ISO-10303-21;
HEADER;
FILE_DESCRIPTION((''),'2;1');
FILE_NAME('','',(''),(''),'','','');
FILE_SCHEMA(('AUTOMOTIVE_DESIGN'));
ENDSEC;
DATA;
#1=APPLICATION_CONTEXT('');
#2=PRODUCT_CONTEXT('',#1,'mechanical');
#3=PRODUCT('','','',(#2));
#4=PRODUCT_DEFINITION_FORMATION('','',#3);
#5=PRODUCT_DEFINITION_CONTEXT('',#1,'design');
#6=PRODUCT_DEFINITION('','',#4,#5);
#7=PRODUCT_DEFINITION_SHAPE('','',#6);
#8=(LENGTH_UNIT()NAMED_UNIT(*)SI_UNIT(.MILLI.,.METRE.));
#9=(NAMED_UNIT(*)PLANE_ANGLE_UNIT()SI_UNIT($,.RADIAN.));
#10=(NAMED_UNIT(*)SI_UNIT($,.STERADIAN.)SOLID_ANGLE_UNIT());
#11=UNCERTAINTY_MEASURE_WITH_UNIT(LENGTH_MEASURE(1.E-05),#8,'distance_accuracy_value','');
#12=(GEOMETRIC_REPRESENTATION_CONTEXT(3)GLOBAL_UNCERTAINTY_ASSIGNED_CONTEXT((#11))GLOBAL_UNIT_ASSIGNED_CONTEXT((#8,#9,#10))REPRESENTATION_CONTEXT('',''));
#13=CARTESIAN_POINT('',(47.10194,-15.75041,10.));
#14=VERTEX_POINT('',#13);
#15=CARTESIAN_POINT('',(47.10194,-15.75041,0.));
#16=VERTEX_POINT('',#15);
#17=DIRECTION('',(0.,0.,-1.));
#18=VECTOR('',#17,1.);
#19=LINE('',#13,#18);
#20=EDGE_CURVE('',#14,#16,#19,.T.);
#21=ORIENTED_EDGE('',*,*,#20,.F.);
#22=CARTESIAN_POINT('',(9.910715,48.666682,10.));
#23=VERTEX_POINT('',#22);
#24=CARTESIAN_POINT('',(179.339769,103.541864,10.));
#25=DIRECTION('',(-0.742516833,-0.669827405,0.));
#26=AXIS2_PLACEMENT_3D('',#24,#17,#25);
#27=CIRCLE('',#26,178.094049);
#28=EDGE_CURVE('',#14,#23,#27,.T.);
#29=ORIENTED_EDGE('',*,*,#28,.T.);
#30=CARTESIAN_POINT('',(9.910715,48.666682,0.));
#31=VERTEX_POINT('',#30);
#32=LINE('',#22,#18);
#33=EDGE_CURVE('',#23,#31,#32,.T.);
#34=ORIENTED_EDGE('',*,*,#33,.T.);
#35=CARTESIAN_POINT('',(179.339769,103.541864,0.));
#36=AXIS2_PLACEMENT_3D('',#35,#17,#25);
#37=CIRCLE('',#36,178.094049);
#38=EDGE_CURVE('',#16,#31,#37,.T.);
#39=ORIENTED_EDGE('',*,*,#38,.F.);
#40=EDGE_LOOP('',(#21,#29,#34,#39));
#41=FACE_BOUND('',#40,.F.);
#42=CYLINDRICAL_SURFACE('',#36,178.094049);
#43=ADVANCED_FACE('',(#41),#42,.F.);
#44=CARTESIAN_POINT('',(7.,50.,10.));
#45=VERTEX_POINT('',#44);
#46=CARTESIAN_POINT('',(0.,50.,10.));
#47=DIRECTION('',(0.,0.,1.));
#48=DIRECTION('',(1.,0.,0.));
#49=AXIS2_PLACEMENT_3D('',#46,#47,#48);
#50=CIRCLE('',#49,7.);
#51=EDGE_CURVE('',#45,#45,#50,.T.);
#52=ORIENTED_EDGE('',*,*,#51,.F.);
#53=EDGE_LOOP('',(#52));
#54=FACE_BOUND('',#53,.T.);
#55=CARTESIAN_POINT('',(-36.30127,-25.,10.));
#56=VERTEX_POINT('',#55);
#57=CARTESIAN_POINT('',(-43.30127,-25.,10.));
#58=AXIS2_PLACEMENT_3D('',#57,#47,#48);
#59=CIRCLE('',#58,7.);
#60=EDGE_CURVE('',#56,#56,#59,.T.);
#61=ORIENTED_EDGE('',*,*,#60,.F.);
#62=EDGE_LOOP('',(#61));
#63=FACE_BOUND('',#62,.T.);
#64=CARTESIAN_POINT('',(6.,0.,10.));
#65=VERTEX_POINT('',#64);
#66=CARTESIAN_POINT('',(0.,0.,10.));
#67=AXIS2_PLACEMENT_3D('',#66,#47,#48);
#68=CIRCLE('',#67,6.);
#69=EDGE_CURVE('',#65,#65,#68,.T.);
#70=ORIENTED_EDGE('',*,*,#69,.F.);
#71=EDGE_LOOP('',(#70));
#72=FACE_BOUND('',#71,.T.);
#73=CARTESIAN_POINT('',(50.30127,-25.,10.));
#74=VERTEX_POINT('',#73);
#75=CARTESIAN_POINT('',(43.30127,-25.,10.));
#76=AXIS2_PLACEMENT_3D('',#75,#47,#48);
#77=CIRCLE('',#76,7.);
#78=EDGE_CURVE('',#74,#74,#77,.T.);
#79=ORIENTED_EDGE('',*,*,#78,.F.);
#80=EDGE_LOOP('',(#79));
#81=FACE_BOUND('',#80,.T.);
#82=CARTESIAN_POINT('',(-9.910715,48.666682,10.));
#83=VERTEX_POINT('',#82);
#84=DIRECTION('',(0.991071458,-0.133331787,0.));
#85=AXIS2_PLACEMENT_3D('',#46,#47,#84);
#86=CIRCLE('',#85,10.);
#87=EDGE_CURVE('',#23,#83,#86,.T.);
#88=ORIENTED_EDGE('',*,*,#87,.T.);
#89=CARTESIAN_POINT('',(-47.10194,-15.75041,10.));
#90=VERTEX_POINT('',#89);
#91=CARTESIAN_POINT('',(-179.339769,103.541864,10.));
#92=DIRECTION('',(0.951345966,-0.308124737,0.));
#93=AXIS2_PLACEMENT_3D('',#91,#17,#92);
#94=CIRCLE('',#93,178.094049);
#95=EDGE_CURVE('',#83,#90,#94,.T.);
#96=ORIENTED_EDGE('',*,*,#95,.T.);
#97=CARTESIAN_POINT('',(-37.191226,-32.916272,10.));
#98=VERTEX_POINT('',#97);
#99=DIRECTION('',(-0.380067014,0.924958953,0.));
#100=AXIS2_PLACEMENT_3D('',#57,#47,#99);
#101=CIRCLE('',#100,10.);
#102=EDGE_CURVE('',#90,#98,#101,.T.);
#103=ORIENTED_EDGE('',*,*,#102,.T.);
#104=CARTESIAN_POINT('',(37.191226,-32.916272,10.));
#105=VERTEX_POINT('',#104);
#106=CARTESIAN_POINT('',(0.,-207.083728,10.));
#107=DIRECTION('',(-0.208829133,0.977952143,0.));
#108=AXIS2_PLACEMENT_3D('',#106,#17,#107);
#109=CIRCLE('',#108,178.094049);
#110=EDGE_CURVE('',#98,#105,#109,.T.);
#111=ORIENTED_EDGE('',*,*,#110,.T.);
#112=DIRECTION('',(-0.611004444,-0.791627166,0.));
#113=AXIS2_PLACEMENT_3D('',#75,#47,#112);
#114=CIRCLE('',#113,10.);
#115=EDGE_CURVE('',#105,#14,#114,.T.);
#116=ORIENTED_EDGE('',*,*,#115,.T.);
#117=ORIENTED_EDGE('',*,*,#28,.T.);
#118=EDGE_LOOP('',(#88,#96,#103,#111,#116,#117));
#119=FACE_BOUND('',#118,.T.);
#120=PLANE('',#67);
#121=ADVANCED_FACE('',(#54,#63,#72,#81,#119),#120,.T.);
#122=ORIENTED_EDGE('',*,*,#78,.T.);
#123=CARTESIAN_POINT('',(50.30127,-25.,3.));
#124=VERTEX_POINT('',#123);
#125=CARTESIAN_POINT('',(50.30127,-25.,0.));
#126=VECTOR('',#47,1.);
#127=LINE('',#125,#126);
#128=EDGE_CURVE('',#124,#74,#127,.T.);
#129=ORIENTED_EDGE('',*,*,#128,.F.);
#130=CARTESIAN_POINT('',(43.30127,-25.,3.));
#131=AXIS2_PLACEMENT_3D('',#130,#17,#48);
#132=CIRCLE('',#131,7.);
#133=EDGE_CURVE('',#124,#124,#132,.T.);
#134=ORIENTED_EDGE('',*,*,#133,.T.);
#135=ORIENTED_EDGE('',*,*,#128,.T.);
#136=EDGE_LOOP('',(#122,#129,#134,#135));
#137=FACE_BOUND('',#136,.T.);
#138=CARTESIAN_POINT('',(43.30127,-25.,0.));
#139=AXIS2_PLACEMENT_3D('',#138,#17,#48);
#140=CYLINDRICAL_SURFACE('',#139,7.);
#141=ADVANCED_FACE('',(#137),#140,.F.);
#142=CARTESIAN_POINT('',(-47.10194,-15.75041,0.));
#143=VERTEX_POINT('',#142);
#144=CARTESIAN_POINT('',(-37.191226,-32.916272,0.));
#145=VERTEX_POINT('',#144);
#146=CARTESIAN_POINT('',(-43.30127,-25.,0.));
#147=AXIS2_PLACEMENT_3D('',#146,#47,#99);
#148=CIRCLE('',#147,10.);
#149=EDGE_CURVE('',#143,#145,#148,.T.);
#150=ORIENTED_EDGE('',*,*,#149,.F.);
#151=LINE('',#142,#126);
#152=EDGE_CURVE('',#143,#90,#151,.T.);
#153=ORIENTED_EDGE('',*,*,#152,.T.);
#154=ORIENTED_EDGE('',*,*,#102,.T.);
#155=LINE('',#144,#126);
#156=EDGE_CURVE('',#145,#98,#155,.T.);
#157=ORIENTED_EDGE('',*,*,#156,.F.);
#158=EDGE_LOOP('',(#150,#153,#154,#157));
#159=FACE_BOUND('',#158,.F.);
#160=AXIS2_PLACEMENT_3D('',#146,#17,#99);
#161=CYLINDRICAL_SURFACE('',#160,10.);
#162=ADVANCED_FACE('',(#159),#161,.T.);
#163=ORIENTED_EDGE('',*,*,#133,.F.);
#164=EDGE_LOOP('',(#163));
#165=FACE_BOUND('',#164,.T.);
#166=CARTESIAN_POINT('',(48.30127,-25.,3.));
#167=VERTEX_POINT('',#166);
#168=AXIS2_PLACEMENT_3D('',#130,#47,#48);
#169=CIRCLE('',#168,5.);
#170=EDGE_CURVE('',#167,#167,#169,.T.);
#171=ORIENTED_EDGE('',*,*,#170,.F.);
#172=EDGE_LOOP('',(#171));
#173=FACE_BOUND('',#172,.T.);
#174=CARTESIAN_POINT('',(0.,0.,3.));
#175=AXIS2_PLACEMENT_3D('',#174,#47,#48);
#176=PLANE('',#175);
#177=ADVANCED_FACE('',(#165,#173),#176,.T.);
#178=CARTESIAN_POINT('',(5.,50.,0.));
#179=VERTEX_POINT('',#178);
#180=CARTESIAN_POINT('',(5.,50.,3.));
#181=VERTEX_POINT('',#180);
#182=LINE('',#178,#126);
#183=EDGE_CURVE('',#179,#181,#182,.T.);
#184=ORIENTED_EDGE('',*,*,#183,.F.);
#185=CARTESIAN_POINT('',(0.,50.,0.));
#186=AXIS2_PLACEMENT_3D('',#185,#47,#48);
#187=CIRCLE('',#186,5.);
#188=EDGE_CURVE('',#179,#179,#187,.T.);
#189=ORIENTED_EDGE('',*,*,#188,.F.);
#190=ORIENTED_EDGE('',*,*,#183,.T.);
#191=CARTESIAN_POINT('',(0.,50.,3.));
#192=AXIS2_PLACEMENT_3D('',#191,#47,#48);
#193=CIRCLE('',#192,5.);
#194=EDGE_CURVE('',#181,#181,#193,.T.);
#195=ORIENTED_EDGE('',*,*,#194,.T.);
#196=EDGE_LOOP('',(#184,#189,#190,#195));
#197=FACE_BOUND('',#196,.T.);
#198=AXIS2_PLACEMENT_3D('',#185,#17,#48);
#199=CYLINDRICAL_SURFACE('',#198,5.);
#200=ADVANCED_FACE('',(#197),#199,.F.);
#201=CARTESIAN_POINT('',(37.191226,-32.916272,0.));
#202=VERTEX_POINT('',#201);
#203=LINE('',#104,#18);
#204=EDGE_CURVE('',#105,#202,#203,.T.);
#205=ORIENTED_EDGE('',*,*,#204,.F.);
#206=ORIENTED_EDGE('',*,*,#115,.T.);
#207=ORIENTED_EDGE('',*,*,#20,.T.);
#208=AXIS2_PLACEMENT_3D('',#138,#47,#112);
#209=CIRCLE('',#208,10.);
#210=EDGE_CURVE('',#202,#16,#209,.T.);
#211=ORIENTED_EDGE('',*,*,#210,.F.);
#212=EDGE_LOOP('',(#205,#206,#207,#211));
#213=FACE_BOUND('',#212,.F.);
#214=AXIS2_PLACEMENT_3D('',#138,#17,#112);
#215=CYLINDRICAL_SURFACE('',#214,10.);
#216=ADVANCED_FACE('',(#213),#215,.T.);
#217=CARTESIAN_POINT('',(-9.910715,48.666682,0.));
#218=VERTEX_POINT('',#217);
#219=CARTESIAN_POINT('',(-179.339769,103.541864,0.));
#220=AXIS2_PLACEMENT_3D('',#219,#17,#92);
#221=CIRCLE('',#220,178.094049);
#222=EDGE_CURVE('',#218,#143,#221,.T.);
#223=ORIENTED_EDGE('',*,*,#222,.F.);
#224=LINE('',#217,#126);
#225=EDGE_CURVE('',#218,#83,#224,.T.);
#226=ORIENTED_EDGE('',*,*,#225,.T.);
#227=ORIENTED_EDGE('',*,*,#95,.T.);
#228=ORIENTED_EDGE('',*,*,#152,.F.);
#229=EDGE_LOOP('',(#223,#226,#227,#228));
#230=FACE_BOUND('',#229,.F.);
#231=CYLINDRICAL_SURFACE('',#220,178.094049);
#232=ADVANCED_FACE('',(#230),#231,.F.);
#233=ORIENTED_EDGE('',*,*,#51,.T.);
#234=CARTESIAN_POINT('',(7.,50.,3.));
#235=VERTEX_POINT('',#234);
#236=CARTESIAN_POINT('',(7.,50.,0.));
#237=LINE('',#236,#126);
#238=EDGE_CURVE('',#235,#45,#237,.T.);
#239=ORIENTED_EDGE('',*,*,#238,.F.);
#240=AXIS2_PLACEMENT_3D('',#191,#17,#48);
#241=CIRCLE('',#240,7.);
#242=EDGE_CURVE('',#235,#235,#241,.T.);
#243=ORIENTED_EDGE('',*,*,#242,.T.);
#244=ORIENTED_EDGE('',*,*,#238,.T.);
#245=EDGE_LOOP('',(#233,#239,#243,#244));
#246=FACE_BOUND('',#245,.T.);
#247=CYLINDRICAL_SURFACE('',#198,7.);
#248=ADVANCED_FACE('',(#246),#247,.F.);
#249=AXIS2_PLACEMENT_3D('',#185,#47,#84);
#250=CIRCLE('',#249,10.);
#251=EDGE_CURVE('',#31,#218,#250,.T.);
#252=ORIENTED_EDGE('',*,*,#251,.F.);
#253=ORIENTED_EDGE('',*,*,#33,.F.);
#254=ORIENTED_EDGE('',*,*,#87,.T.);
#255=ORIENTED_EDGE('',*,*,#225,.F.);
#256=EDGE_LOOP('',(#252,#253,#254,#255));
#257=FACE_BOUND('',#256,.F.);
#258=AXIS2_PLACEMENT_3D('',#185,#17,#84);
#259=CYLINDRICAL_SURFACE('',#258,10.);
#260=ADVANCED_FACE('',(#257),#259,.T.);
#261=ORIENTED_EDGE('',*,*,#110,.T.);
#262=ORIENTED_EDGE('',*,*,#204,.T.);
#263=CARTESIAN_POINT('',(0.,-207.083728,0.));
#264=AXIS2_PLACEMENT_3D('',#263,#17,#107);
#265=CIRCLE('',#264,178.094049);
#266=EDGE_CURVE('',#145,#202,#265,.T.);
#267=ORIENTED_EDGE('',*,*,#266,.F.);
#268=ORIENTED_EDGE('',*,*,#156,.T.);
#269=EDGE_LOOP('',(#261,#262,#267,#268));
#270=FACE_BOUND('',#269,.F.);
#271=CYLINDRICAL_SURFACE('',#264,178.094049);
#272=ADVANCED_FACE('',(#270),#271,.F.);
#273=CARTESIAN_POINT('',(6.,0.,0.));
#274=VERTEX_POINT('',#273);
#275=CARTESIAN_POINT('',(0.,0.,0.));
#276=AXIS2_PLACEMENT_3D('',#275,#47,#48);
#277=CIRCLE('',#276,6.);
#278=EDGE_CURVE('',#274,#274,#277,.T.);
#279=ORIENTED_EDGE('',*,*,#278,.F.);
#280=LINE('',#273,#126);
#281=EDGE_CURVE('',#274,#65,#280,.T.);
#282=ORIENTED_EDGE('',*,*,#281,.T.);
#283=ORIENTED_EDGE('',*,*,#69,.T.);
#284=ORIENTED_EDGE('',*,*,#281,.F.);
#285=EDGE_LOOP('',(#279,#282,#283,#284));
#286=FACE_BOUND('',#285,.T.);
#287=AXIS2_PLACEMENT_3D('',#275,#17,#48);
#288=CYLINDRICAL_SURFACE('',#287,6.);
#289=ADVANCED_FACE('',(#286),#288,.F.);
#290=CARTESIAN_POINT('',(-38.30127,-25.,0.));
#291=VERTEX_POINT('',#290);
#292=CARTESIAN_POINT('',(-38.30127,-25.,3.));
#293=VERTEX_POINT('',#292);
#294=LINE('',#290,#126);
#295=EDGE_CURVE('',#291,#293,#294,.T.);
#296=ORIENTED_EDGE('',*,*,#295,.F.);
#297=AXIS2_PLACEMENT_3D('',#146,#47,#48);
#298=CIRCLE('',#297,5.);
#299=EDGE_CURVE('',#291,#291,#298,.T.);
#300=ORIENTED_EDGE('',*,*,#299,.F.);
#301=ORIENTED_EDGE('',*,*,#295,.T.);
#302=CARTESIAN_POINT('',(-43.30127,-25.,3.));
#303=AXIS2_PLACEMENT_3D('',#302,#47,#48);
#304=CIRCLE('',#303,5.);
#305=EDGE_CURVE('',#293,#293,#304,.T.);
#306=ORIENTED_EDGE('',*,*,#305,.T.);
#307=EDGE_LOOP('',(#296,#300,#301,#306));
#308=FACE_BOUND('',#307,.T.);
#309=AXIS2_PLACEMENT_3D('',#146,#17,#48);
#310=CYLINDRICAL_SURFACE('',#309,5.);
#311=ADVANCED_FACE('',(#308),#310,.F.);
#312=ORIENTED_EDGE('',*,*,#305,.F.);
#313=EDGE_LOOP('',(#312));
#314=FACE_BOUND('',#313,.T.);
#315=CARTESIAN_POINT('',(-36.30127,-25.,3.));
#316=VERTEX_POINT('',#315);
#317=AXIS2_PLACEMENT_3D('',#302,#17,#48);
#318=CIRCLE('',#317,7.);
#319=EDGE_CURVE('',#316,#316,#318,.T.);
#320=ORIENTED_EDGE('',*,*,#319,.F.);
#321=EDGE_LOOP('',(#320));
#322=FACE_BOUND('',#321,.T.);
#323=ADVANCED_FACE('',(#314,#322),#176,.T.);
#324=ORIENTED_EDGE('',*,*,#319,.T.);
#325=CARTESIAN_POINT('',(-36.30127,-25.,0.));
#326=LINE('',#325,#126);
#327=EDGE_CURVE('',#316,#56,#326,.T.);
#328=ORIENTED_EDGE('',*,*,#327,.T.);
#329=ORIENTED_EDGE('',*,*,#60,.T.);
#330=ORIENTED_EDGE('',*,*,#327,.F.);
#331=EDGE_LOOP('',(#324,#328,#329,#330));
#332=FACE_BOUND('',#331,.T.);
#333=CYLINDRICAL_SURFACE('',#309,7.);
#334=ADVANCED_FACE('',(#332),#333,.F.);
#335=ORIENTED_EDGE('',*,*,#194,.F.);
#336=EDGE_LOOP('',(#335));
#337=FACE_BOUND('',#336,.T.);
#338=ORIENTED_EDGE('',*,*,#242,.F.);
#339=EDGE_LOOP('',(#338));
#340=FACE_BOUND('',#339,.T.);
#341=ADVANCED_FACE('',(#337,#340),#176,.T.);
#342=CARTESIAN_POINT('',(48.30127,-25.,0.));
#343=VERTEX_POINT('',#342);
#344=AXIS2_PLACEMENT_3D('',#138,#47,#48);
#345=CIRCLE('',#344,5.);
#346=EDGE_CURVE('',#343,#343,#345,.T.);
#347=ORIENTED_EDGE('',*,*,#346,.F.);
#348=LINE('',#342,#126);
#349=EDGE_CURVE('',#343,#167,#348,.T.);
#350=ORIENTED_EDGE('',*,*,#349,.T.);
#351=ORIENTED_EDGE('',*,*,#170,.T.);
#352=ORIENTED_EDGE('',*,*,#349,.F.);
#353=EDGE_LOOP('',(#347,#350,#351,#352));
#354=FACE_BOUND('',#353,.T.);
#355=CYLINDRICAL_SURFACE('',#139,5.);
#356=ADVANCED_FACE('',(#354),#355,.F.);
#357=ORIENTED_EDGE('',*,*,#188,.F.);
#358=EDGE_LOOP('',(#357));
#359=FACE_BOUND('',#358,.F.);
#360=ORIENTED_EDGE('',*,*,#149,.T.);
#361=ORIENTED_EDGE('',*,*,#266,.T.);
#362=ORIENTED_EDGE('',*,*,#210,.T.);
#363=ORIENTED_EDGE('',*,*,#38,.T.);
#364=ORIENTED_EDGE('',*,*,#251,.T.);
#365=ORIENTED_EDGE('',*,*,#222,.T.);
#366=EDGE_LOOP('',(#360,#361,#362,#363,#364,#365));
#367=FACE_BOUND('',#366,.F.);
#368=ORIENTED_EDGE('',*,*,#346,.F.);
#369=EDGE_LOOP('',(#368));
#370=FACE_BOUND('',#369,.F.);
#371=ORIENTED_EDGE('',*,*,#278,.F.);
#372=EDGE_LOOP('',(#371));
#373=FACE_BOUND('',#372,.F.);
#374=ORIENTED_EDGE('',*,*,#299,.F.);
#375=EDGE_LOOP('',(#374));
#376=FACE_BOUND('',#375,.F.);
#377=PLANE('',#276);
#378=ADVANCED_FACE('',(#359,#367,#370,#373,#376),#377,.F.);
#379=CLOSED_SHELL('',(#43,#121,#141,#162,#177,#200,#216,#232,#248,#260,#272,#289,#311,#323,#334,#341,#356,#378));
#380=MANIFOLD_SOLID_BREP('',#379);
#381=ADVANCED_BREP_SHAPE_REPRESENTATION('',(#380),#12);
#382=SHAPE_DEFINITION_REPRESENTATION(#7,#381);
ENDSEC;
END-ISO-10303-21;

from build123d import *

# Parameters (mm, degrees)
F1_R     = 7
F1_R_2   = 6
F1_R_3   = 5
F2_DEPTH = 3
F3_DEPTH = 10


# Not quite as in the source:
# - a feature of the source that left no trace in its solid (it failed there, or was rolled back) is left out


with BuildPart() as f2:
    # F1 (on Top) → F2 (new body)
    with BuildSketch(Plane.XY):
        with BuildLine():
            ThreePointArc((9.9107145783, 48.6666821283), (0, 60), (-9.9107145783, 48.6666821283))
            ThreePointArc((-9.9107145783, 48.6666821283), (-25.1057988762, 14.4948397394), (-47.1019403302, -15.7504104697))
            ThreePointArc((-47.1019403302, -15.7504104697), (-51.9615242271, -30), (-37.1912257519, -32.9162716586))
            ThreePointArc((-37.1912257519, -32.9162716586), (0, -28.9896794788), (37.1912257519, -32.9162716586))
            ThreePointArc((37.1912257519, -32.9162716586), (51.9615242271, -30), (47.1019403302, -15.7504104697))
            ThreePointArc((47.1019403302, -15.7504104697), (25.1057988762, 14.4948397394), (9.9107145783, 48.6666821283))
        make_face()
        with Locations((-43.3012701892, -25)):
            Circle(F1_R, mode=Mode.SUBTRACT)
        with Locations((43.3012701892, -25)):
            Circle(F1_R, mode=Mode.SUBTRACT)
        Circle(F1_R_2, mode=Mode.SUBTRACT)
        with Locations((0, 50)):
            Circle(F1_R, mode=Mode.SUBTRACT)
        with Locations((-43.3012701892, -25)):
            Circle(F1_R)
        with Locations((-43.3012701892, -25)):
            Circle(F1_R_3, mode=Mode.SUBTRACT)
        with Locations((43.3012701892, -25)):
            Circle(F1_R)
        with Locations((43.3012701892, -25)):
            Circle(F1_R_3, mode=Mode.SUBTRACT)
        with Locations((0, 50)):
            Circle(F1_R)
        with Locations((0, 50)):
            Circle(F1_R_3, mode=Mode.SUBTRACT)
    extrude(amount=F2_DEPTH)

    # F1 (on Top) → F3 (join)
    with BuildSketch(Plane.XY):
        with BuildLine():
            ThreePointArc((9.9107145783, 48.6666821283), (0, 60), (-9.9107145783, 48.6666821283))
            ThreePointArc((-9.9107145783, 48.6666821283), (-25.1057988762, 14.4948397394), (-47.1019403302, -15.7504104697))
            ThreePointArc((-47.1019403302, -15.7504104697), (-51.9615242271, -30), (-37.1912257519, -32.9162716586))
            ThreePointArc((-37.1912257519, -32.9162716586), (0, -28.9896794788), (37.1912257519, -32.9162716586))
            ThreePointArc((37.1912257519, -32.9162716586), (51.9615242271, -30), (47.1019403302, -15.7504104697))
            ThreePointArc((47.1019403302, -15.7504104697), (25.1057988762, 14.4948397394), (9.9107145783, 48.6666821283))
        make_face()
        with Locations((-43.3012701892, -25)):
            Circle(F1_R, mode=Mode.SUBTRACT)
        with Locations((43.3012701892, -25)):
            Circle(F1_R, mode=Mode.SUBTRACT)
        Circle(F1_R_2, mode=Mode.SUBTRACT)
        with Locations((0, 50)):
            Circle(F1_R, mode=Mode.SUBTRACT)
    extrude(amount=F3_DEPTH)


solid = f2.part
